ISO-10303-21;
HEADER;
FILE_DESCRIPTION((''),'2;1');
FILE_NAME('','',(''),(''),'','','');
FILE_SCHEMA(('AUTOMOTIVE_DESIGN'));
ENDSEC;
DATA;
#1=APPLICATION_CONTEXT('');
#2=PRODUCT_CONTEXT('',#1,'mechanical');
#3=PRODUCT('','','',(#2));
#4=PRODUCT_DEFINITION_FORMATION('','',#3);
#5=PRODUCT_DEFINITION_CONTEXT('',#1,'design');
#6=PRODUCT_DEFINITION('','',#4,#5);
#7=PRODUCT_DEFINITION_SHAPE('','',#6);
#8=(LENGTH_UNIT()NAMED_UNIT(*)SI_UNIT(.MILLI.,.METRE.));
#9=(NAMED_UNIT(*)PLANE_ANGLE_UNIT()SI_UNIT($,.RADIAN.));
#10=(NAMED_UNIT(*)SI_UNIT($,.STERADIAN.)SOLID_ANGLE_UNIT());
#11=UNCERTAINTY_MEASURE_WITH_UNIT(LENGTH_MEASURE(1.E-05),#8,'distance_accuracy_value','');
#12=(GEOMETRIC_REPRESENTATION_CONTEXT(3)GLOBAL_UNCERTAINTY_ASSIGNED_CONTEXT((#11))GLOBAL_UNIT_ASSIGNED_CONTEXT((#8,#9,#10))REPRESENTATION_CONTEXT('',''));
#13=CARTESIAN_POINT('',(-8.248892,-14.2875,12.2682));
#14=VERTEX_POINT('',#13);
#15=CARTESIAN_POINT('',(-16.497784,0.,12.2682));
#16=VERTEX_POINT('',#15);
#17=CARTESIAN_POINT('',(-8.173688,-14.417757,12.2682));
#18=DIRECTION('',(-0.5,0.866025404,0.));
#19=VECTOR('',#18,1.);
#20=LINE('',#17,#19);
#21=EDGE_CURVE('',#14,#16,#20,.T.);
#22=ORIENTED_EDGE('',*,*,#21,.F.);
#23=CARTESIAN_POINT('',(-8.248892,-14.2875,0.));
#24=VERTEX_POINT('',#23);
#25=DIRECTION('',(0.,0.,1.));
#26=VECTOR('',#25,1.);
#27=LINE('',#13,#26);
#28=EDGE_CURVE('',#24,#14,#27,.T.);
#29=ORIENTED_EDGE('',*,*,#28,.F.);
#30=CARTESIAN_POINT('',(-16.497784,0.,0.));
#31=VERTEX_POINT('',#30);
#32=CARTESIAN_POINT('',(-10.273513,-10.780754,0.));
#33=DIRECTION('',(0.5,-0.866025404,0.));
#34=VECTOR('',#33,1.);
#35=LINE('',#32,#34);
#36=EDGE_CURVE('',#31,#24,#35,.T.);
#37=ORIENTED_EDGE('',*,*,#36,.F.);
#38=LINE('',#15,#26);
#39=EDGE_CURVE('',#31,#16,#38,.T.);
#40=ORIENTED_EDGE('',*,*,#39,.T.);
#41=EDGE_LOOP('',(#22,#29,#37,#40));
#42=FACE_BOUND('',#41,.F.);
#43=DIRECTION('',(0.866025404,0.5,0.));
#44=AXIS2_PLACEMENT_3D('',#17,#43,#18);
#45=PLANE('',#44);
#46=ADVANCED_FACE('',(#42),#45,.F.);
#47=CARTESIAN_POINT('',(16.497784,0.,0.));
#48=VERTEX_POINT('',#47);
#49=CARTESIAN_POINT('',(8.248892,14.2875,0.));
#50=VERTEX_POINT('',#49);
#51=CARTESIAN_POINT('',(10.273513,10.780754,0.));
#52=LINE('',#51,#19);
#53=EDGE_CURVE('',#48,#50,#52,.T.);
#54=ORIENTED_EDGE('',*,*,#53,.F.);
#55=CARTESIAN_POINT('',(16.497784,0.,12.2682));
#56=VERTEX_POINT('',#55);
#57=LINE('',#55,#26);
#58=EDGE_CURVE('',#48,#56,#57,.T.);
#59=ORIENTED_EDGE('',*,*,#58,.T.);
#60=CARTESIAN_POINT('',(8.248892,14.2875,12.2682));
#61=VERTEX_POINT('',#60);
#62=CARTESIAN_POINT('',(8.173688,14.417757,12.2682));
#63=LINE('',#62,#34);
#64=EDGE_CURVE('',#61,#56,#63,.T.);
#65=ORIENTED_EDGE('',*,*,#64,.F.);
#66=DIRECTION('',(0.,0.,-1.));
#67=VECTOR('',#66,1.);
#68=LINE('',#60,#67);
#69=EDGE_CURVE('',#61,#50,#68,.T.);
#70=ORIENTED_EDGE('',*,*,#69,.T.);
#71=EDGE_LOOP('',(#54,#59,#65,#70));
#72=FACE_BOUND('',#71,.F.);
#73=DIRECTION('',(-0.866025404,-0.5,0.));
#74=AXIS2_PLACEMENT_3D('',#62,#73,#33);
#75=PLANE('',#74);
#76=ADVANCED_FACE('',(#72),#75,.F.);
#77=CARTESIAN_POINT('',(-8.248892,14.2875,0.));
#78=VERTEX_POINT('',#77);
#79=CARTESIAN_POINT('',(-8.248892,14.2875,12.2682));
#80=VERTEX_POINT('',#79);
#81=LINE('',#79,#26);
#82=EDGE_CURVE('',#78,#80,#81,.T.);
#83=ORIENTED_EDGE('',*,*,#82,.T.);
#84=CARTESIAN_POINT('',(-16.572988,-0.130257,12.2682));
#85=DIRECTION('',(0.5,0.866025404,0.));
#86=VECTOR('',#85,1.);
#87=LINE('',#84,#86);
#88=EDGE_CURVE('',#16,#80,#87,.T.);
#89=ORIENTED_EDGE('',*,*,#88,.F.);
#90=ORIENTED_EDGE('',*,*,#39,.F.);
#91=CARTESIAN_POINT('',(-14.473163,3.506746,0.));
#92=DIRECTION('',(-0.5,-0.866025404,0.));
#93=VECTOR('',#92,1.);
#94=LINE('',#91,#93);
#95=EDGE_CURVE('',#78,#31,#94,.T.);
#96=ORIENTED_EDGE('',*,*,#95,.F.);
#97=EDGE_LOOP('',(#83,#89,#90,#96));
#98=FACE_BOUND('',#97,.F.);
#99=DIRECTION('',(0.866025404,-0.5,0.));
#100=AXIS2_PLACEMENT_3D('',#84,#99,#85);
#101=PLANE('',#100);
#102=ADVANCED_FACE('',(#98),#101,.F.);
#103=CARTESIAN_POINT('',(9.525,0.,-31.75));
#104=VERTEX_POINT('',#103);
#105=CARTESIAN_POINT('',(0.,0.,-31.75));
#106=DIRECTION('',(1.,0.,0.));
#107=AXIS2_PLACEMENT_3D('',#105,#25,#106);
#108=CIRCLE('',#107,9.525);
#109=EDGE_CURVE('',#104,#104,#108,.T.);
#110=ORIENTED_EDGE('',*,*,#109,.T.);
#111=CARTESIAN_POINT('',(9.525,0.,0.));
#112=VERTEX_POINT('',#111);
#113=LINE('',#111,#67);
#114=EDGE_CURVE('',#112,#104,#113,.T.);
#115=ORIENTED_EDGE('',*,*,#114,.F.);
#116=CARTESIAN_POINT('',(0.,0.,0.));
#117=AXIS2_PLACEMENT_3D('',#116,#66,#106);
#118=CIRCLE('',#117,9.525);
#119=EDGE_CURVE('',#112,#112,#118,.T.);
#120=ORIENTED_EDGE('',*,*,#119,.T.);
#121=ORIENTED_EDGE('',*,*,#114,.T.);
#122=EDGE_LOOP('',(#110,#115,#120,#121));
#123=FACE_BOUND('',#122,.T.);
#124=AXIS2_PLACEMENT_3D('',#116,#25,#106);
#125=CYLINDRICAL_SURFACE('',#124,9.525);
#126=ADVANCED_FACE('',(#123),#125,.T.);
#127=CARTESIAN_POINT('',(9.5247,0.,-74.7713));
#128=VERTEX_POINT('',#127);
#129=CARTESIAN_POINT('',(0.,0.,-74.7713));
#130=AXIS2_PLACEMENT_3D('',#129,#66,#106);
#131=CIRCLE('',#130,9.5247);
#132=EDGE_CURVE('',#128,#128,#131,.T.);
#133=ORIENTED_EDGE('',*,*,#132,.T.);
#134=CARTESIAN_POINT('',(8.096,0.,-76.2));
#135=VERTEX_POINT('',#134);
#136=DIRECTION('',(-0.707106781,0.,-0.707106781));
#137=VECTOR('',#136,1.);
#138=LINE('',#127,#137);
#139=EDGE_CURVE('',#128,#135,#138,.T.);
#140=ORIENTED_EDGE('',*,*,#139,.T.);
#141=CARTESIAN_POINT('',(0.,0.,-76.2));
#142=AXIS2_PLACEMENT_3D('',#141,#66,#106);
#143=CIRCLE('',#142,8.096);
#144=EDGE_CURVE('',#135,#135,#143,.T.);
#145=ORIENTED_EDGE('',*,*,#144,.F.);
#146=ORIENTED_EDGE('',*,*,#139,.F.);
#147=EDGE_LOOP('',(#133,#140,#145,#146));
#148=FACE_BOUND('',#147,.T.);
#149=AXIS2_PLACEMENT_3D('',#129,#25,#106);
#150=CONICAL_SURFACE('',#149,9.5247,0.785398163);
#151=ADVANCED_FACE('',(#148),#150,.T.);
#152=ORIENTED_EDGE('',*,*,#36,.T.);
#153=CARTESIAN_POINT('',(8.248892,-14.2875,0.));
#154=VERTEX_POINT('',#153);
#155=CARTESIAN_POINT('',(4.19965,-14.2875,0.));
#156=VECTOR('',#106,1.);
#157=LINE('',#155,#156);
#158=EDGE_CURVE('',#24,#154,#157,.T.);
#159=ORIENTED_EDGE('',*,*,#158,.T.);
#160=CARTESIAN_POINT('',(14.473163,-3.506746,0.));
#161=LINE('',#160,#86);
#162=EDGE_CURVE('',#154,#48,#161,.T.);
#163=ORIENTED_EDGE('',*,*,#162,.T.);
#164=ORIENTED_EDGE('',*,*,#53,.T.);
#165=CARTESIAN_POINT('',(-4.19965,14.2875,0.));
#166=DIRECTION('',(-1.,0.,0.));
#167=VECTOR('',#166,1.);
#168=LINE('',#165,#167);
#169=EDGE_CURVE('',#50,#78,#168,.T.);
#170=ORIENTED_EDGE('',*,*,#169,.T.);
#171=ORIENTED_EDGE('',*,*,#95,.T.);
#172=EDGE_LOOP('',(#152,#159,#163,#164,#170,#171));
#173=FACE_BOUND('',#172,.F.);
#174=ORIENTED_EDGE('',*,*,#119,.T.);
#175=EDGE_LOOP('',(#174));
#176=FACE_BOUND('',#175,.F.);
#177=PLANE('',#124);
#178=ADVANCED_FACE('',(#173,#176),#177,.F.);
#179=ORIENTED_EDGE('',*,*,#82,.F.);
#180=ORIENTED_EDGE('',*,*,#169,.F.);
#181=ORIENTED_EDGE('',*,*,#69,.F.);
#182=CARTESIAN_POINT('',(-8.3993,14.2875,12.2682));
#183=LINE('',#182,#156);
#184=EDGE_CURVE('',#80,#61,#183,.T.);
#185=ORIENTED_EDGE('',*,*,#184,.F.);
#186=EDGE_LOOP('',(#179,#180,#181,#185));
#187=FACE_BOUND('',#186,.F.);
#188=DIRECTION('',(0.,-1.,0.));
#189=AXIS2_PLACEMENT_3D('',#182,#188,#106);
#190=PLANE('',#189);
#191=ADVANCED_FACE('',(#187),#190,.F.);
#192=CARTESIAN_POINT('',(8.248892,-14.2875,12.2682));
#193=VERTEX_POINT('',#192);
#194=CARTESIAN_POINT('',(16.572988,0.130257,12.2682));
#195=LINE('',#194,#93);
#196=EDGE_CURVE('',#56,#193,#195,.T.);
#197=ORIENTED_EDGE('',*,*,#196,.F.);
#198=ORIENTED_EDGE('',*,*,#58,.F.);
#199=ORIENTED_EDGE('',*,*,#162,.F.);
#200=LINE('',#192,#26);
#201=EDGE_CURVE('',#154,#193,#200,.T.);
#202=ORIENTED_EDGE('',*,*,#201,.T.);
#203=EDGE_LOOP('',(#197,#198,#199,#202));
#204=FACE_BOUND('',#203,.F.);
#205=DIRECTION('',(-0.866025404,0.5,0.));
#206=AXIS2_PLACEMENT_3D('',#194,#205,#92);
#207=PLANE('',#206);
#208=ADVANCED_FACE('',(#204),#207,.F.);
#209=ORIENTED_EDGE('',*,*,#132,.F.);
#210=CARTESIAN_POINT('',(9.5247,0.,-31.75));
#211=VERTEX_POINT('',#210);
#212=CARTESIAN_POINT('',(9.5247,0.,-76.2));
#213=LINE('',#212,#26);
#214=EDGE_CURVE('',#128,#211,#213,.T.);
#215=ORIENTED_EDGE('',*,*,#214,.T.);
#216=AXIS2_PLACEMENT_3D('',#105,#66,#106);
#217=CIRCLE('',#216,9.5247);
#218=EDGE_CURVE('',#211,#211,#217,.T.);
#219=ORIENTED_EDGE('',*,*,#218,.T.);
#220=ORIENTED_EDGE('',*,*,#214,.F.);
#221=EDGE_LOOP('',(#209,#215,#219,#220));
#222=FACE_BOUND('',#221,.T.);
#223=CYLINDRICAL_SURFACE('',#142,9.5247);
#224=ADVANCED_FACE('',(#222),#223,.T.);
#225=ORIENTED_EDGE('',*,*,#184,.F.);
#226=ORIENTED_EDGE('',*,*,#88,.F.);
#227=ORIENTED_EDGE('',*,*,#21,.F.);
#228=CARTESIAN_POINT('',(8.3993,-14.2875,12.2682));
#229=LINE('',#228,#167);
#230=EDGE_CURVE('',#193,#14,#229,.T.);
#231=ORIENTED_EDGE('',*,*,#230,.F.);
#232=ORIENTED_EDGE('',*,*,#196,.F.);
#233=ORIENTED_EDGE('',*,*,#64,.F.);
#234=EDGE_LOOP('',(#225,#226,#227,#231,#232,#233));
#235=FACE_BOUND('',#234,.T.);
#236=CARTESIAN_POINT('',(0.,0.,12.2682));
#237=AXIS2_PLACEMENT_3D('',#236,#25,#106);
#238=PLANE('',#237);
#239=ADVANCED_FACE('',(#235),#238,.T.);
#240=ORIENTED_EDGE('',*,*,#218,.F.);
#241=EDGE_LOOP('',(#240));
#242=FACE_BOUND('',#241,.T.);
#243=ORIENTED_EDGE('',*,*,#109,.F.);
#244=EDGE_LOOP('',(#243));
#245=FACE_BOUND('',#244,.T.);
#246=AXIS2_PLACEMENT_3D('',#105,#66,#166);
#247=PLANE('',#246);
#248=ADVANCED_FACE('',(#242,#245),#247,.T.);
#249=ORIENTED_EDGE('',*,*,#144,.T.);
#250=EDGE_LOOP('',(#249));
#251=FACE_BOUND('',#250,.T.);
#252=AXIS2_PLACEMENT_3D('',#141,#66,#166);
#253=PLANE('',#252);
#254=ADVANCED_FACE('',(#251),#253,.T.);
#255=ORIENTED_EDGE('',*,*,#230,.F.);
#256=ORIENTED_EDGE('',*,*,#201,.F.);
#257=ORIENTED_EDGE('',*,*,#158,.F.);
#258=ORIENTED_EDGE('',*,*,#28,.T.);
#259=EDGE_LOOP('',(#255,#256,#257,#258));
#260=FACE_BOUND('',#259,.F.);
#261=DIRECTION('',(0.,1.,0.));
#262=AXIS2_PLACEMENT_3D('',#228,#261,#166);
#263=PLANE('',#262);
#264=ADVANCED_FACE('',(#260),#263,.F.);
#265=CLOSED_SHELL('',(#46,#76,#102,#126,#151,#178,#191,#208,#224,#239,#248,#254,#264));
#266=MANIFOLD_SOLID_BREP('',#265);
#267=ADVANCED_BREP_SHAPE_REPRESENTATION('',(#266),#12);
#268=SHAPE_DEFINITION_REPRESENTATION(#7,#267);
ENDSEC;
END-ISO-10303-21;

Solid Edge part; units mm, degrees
sketch "Sketch1" plane through (0, 0, 0) normal (0, 0, 1) x (1, 0, 0)
  circle A0 centre (0, 0) radius 16.5735
  dimension "D1" = 33.147
extrude "Protrusion1" add sketch "Sketch1" along normal blind 12.2682
sketch "Sketch2" plane through (0, 0, 0) normal (0, 0, -1) x (1, 0, 0)
  circle A0 centre (0, 0) radius 9.525
extrude "Protrusion2" add sketch "Sketch2" along normal blind 76.2
sketch "Sketch3" plane through (0, 0, -76.2) normal (0, 0, -1) x (1, 0, 0)
  circle A0 centre (0, 0) radius 9.5247
extrude "Cutout1" cut sketch "Sketch3" against normal blind 44.45 flip side to cut
chamfer "Chamfer_1" distance 1.4287 angle 45 1 edges at (-9.5247, 0, -76.2)
sketch "Sketch4" plane through (0, 0, 12.2682) normal (0, 0, 1) x (1, 0, 0)
  line L0 (-8.3993, 14.2875) -> (8.3993, 14.2875)
  dimension "D1" = 28.575
extrude "Cutout2" cut sketch "Sketch4" against normal up to next material side at (0, 14.3375, 12.2682)
pattern_circular "Pattern1" count 6 over 360 about axis through (0, 0, 12.2682) along (0, 0, 1) of "Cutout2"
properties part number "202105"
